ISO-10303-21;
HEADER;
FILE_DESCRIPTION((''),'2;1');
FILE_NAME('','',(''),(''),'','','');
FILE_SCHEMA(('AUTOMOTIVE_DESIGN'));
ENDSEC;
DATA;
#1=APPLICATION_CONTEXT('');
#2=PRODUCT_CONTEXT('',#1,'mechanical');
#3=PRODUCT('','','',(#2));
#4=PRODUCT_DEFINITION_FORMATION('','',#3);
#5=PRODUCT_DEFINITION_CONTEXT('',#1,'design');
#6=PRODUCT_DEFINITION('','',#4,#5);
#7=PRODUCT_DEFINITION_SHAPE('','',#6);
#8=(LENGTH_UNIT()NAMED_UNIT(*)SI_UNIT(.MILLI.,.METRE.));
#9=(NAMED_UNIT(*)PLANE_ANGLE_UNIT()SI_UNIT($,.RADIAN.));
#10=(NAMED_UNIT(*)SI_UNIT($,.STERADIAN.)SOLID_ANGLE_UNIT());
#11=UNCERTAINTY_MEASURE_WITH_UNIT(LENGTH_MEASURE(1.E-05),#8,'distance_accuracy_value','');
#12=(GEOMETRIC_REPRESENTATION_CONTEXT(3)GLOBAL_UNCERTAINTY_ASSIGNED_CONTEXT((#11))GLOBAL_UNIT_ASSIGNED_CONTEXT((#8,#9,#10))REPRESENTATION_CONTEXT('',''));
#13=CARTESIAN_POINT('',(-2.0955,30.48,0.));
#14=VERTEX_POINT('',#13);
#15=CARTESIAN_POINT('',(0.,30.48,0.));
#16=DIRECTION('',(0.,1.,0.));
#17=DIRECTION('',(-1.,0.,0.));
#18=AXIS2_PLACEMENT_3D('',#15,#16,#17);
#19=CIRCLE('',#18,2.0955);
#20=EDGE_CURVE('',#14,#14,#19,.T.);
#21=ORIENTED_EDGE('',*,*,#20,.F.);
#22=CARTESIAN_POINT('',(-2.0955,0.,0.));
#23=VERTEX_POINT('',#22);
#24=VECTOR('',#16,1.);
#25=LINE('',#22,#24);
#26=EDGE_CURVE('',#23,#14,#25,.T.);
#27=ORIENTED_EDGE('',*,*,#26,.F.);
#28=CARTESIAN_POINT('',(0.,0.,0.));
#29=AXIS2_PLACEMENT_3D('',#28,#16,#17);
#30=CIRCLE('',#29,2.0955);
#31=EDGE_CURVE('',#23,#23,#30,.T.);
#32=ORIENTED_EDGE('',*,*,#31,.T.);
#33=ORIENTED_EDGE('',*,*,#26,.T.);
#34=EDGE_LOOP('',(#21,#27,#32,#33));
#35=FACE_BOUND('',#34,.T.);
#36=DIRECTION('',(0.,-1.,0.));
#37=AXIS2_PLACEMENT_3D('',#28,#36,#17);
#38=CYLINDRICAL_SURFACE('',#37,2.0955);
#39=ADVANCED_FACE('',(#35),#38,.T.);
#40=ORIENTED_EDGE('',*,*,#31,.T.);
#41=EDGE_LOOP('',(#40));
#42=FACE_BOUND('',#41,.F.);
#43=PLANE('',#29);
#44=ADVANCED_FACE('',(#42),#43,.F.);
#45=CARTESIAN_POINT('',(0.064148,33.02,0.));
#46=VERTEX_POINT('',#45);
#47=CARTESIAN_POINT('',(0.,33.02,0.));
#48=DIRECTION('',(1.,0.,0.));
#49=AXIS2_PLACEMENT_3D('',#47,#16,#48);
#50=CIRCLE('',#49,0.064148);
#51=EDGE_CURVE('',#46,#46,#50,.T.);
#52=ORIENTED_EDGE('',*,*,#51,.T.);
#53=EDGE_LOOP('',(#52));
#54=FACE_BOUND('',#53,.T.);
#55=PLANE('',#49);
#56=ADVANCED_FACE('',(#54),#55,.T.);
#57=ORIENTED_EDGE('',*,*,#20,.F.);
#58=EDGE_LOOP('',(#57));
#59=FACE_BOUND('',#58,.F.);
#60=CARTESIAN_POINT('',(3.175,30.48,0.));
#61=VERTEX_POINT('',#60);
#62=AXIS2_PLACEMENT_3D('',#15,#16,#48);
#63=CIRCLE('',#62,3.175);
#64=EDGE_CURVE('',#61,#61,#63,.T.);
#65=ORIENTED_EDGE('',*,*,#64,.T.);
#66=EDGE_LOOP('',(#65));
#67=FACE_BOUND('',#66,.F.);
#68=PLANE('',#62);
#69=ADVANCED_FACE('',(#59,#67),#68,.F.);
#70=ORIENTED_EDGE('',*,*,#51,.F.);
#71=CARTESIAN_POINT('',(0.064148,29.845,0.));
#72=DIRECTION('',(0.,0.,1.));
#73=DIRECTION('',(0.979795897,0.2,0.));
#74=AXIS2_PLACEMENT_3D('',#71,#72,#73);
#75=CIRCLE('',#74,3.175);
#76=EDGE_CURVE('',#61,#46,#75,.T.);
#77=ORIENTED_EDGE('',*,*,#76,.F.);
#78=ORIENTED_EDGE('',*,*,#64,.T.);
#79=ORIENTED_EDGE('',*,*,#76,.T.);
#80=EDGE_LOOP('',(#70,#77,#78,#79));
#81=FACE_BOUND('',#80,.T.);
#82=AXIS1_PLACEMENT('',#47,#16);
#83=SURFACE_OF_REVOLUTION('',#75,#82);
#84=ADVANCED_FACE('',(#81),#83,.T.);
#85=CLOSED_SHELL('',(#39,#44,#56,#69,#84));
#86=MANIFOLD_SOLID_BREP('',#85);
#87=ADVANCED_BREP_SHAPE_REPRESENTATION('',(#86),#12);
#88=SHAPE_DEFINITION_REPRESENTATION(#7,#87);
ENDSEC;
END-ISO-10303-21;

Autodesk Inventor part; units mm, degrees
ref_plane "YZ Plane" through (0, 0, 0) normal (1, 0, 0) x (0, 1, 0)
ref_plane "XZ Plane" through (0, 0, 0) normal (0, 1, 0) x (-1, 0, 0)
ref_plane "XY Plane" through (0, 0, 0) normal (0, 0, 1) x (1, 0, 0)
sketch "Sketch1" plane through (0, 0, 0) normal (0, 1, 0) x (-1, 0, 0)
  circle A0 centre (0, 0) radius 2.0955
  dimension "d0" = 4.191
extrude "Extrusion1" add sketch "Sketch1" along normal blind 30.48
sketch "Sketch2" plane through (0, 30.48, 0) normal (0, 1, 0) x (1, 0, 0)
  circle A0 centre (0, 0) radius 3.175
  dimension "d3" = 6.35
extrude "Extrusion2" add sketch "Sketch2" along normal blind 2.54
fillet "Fillet1" radius 3.175 1 edges at (-3.175, 33.02, 0)
thread "Thread1" size "10-24 UNC" class "2A" standard "ANSI Unified Screw Threads" full length
properties part number "0.156screw"
